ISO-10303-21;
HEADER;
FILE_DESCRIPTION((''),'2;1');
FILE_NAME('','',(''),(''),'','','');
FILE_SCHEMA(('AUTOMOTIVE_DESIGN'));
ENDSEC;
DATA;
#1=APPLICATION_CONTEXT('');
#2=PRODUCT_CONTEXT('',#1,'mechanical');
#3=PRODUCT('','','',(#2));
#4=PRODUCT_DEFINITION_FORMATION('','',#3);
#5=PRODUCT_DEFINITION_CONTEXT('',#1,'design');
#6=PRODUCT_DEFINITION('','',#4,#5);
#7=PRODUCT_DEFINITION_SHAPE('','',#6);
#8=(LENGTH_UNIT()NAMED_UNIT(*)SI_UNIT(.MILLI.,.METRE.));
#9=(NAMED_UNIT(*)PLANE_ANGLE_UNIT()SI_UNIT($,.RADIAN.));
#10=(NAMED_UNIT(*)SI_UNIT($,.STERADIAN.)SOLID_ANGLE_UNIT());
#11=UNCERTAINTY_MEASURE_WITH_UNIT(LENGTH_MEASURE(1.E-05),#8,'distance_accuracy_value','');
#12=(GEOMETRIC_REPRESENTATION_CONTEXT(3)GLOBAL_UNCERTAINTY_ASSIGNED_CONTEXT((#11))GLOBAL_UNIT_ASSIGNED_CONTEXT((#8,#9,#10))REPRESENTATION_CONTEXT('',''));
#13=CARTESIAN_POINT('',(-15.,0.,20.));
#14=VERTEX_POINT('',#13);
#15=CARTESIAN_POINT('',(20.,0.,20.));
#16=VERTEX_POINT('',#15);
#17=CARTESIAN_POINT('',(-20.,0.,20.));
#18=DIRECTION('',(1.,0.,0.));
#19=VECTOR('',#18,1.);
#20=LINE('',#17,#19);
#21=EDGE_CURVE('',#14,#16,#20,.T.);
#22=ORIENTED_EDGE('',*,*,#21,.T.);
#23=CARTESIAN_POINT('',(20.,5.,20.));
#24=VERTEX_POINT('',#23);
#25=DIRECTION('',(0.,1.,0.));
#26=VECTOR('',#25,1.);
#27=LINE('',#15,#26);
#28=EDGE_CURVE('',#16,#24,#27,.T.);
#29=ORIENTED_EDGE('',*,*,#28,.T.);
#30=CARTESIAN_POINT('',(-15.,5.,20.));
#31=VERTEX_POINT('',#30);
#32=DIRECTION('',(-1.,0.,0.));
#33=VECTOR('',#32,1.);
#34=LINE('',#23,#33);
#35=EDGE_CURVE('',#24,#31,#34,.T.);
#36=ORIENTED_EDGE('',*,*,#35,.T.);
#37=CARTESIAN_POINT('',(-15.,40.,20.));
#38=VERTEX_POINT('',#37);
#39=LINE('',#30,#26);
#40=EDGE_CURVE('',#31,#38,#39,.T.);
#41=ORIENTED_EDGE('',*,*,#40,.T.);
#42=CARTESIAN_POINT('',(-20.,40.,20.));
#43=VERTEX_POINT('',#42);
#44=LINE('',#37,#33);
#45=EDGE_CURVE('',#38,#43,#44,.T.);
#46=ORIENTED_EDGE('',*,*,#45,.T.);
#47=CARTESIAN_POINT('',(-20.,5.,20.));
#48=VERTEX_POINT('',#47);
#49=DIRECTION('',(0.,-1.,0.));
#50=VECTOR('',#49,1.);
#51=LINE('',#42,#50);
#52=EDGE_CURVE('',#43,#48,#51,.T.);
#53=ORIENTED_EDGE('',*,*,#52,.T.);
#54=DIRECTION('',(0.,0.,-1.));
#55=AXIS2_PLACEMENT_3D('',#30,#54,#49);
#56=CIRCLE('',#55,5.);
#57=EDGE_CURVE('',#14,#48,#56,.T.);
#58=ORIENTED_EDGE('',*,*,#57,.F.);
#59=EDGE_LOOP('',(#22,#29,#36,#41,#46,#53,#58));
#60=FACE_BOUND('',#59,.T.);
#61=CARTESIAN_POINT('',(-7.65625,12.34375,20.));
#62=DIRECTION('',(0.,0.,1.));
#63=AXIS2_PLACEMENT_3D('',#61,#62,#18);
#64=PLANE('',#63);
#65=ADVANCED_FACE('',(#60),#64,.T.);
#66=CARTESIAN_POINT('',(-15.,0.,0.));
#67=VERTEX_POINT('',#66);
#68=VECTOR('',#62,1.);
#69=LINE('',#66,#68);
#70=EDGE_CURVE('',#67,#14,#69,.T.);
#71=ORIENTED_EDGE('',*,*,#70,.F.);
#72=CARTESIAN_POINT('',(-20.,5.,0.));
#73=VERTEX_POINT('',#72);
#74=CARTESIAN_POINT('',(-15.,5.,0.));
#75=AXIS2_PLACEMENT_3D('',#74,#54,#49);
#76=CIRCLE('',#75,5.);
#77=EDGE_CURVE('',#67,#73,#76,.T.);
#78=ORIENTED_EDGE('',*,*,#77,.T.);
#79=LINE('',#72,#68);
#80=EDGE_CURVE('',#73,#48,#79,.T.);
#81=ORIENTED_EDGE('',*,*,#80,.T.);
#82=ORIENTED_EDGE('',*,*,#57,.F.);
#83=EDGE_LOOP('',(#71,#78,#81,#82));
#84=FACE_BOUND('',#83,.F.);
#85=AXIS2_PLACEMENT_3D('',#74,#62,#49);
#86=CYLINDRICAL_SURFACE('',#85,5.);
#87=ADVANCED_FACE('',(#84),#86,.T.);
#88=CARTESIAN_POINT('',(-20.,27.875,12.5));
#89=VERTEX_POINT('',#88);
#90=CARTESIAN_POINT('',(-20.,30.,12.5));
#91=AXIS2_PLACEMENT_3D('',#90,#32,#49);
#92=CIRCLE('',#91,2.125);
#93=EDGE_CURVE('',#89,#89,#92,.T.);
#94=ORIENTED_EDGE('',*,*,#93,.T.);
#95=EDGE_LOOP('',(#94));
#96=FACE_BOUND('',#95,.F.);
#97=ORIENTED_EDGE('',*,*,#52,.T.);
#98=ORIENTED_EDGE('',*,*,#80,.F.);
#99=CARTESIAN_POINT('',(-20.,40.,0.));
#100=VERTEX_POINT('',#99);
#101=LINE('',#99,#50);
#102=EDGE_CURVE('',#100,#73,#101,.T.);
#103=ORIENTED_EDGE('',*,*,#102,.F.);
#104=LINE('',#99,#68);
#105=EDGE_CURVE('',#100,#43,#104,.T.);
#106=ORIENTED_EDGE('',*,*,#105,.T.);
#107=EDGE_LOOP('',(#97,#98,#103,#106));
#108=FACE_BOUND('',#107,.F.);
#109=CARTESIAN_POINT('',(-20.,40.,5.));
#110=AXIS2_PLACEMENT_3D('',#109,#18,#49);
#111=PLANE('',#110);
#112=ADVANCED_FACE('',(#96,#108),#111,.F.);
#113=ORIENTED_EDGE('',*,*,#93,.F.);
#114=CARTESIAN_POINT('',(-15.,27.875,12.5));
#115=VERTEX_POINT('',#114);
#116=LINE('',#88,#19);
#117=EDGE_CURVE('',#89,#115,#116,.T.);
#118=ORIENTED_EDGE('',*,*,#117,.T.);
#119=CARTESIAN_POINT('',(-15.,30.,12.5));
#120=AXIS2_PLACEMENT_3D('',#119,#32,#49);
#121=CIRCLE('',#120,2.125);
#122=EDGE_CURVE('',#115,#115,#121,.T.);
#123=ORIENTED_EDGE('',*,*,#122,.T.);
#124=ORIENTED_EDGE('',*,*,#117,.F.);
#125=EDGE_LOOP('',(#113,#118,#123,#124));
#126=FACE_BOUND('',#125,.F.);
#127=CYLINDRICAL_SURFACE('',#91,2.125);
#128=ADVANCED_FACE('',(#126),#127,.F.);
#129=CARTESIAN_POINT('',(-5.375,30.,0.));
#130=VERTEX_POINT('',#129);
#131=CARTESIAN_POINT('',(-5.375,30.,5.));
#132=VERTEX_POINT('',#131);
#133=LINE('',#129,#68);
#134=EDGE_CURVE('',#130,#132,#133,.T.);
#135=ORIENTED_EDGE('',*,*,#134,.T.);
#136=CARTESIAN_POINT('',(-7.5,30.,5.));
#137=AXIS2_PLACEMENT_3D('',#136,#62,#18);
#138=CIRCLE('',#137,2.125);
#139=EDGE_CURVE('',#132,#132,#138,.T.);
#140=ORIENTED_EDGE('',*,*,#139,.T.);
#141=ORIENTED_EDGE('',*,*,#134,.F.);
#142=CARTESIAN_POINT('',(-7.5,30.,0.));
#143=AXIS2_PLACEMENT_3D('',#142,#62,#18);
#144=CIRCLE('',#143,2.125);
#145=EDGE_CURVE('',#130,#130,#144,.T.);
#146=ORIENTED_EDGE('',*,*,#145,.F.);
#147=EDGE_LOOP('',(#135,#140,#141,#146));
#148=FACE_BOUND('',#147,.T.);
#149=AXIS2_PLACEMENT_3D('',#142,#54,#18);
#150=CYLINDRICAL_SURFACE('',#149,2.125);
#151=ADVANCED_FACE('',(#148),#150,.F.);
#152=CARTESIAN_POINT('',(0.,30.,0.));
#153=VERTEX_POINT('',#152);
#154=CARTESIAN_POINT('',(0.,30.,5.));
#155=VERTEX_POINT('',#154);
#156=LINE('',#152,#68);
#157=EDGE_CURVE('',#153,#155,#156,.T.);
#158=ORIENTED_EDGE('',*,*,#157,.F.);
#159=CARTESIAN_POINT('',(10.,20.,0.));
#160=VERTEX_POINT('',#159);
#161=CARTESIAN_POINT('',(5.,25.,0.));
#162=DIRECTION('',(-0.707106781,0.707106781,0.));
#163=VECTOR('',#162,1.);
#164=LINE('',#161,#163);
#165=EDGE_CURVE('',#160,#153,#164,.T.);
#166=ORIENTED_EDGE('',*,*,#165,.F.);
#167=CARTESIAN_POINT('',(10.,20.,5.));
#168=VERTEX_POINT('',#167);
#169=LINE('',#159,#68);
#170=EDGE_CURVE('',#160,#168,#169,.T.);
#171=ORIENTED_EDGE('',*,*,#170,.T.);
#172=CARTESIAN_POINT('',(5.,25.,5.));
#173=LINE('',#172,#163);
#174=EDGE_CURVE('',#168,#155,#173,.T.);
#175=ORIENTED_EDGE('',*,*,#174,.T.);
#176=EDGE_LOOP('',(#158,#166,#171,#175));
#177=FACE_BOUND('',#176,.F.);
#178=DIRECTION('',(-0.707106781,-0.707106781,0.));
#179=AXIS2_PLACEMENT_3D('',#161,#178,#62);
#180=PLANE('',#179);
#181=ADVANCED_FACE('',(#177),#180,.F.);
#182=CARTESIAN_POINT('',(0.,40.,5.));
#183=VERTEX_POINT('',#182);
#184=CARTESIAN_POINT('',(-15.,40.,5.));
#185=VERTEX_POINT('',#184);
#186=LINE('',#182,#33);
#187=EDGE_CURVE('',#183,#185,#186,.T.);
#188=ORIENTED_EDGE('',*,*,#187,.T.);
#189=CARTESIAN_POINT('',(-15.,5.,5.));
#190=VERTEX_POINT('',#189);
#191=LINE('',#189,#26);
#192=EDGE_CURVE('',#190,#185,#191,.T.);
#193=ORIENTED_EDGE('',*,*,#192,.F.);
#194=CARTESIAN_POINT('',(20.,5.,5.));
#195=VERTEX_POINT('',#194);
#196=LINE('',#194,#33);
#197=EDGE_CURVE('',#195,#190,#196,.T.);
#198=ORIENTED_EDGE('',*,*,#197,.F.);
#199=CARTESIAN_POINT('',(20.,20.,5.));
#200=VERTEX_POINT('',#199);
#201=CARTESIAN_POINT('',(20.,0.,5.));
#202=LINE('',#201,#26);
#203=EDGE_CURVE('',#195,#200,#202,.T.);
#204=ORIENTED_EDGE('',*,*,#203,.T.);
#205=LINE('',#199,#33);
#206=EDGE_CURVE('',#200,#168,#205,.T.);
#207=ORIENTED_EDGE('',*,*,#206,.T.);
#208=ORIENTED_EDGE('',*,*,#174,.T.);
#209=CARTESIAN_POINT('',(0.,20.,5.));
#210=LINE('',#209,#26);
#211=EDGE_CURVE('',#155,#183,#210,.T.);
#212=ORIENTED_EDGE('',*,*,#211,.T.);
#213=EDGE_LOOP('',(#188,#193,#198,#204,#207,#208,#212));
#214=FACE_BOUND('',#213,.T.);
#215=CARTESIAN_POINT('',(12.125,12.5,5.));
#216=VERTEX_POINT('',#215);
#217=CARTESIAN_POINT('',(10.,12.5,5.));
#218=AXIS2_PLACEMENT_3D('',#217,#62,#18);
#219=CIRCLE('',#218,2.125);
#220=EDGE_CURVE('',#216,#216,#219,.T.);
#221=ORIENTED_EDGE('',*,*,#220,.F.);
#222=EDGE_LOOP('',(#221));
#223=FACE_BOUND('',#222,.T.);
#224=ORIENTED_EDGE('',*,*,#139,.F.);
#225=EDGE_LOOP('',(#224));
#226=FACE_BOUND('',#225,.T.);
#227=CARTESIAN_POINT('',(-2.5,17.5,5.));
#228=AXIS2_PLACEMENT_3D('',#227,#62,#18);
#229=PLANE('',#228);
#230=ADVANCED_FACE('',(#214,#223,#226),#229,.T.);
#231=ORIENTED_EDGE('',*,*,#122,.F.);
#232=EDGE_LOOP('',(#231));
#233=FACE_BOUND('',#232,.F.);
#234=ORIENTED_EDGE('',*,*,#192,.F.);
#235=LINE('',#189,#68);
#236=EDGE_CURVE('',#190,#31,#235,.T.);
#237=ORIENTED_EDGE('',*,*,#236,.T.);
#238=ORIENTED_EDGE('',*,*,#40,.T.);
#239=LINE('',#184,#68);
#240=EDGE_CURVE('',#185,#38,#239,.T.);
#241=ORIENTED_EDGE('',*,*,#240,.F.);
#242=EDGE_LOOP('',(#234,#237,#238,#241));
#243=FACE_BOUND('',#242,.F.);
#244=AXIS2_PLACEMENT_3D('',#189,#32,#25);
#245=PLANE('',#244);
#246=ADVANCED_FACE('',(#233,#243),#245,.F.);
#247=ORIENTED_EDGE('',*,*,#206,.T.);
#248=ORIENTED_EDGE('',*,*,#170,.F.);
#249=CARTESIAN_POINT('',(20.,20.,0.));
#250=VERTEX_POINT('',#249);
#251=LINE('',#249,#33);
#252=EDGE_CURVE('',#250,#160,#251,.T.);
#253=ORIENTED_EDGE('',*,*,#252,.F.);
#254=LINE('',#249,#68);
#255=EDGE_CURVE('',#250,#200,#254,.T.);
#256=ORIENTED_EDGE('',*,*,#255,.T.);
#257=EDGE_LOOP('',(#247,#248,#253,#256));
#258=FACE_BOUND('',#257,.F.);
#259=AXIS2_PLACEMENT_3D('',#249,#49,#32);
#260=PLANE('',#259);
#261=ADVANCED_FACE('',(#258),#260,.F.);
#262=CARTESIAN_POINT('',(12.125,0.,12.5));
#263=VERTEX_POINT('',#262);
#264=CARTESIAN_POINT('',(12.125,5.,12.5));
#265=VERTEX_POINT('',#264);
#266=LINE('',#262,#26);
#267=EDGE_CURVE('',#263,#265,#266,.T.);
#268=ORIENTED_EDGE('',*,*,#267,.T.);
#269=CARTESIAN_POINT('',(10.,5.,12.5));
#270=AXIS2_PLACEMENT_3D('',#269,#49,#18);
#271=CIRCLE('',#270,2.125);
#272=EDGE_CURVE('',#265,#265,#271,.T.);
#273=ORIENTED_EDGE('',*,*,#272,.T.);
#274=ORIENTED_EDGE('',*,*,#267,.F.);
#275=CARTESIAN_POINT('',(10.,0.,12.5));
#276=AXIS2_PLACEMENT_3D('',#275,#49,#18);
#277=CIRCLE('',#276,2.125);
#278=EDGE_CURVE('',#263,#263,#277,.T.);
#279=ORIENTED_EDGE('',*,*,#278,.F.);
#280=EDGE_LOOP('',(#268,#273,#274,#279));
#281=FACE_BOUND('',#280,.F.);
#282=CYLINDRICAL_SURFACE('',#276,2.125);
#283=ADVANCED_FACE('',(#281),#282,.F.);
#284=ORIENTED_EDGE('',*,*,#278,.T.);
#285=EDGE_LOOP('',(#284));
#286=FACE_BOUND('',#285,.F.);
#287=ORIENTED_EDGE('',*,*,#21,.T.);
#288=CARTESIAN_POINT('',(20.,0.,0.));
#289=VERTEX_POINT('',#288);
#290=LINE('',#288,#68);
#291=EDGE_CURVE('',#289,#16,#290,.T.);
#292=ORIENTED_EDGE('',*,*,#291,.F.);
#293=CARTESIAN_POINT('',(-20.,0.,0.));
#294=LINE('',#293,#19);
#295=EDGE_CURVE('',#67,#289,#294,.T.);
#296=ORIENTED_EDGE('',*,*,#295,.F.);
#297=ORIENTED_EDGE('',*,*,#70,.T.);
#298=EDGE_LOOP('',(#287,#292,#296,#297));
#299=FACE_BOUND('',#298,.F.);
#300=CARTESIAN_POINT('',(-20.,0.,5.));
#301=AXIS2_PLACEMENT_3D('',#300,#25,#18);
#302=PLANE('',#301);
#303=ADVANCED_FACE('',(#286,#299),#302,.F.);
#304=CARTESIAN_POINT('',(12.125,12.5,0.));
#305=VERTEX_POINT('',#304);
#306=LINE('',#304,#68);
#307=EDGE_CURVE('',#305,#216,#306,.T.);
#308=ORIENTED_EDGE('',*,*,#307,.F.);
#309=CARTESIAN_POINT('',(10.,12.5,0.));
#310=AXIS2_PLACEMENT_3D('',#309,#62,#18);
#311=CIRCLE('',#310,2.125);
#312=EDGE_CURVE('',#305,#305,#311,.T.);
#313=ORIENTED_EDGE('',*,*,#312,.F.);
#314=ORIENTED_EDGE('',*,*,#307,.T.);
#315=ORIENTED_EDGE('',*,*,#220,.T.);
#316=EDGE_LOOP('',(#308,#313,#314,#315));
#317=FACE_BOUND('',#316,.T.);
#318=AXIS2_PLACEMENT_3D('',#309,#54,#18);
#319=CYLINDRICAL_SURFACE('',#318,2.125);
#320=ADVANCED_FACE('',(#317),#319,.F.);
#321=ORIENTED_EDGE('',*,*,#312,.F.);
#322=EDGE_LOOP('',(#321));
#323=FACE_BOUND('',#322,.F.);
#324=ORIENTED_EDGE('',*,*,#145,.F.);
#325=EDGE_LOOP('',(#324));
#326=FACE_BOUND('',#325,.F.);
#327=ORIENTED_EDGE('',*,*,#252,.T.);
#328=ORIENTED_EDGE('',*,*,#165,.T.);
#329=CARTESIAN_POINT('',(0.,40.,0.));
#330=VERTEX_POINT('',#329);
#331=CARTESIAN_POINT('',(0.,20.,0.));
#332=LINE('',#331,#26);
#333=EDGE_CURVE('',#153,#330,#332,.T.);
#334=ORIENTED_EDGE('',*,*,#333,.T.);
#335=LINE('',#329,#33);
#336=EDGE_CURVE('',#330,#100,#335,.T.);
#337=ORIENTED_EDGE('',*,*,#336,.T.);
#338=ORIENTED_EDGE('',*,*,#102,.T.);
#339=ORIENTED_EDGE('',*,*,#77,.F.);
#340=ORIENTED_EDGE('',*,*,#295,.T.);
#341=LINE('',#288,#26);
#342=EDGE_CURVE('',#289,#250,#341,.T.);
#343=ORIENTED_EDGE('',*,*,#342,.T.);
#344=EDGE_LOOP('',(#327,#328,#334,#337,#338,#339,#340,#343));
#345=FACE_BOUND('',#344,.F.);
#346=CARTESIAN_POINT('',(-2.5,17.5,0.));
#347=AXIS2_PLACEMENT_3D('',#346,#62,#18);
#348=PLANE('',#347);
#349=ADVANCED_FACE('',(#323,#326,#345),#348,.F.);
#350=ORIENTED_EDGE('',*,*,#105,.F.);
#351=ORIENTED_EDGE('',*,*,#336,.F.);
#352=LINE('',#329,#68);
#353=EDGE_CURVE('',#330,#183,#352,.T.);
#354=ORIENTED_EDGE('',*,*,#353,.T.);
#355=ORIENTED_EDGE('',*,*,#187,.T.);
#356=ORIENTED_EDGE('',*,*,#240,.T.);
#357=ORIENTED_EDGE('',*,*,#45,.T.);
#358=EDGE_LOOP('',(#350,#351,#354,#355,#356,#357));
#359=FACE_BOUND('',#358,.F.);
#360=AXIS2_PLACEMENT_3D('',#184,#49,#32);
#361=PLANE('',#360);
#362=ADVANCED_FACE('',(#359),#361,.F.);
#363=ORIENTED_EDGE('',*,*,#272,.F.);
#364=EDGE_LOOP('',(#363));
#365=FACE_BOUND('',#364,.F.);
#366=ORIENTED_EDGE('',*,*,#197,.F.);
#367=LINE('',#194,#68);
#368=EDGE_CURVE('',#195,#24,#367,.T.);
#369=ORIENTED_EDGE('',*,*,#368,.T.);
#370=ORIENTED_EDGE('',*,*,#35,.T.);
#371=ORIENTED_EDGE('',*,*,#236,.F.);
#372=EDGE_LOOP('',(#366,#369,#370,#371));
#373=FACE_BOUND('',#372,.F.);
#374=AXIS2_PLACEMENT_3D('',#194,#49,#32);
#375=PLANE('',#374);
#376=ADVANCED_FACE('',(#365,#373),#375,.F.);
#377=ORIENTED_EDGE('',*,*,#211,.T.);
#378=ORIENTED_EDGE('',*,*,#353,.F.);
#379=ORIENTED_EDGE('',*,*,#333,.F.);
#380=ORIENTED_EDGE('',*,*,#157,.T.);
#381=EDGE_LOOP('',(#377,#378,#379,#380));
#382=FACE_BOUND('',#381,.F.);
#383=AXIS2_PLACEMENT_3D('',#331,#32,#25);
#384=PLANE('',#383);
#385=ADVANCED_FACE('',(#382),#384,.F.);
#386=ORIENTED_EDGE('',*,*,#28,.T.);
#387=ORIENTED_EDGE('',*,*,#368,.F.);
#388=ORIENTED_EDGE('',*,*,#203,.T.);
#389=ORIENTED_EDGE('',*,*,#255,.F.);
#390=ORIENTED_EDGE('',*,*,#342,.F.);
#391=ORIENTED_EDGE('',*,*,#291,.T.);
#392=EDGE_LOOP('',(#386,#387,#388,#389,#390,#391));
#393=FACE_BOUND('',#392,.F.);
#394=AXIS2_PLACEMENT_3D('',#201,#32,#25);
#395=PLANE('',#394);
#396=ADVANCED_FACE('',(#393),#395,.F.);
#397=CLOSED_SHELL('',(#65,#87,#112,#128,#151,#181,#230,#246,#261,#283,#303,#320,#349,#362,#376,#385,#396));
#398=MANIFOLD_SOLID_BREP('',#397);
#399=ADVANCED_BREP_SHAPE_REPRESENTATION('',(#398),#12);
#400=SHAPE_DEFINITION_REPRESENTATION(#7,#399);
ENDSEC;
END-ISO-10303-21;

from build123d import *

# Parameters (mm, degrees)
F0_R     = 2.125
F1_DEPTH = 5
F3_DEPTH = 15
F4_SIZE  = 10
F5_R     = 2.125
F6_DEPTH = 5
F7_R     = 2.125
F8_DEPTH = 5
F9_R     = 5


with BuildPart() as f1:
    # F0 (on Top) → F1 (new body)
    with BuildSketch(Plane.XY):
        Polygon((0, 20), (0, 40), (-20, 40), (-20, 0), (20, 0), (20, 20), align=None)
        with Locations((10, 12.5)):
            Circle(F0_R, mode=Mode.SUBTRACT)
        with Locations((-7.5, 30)):
            Circle(F0_R, mode=Mode.SUBTRACT)
    extrude(amount=F1_DEPTH)

    # F2 (on face) → F3 (join)
    with BuildSketch(Plane.XY.offset(5)):
        Polygon((-15, 40), (-20, 40), (-20, 0), (20, 0), (20, 5), (-15, 5), align=None)
    extrude(amount=F3_DEPTH)

    # F4
    f4_edges = [f1.edges().sort_by_distance(p)[0] for p in [
        (0, 20, 2.5),
    ]]
    chamfer(f4_edges, length=F4_SIZE)

    # F5 (on face) → F6 (cut)
    with BuildSketch(Plane.XZ):
        with Locations((10, 12.5)):
            Circle(F5_R)
    extrude(amount=-F6_DEPTH, mode=Mode.SUBTRACT)

    # F7 (on face) → F8 (cut)
    with BuildSketch(Plane(origin=(-20, 0, 0), x_dir=(0, -1, 0), z_dir=(-1, 0, 0))):
        with Locations((-30, 12.5)):
            Circle(F7_R)
    extrude(amount=-F8_DEPTH, mode=Mode.SUBTRACT)

    # F9
    f9_edges = [f1.edges().sort_by_distance(p)[0] for p in [
        (-20, 0, 10),
    ]]
    fillet(f9_edges, radius=F9_R)


solid = f1.part
